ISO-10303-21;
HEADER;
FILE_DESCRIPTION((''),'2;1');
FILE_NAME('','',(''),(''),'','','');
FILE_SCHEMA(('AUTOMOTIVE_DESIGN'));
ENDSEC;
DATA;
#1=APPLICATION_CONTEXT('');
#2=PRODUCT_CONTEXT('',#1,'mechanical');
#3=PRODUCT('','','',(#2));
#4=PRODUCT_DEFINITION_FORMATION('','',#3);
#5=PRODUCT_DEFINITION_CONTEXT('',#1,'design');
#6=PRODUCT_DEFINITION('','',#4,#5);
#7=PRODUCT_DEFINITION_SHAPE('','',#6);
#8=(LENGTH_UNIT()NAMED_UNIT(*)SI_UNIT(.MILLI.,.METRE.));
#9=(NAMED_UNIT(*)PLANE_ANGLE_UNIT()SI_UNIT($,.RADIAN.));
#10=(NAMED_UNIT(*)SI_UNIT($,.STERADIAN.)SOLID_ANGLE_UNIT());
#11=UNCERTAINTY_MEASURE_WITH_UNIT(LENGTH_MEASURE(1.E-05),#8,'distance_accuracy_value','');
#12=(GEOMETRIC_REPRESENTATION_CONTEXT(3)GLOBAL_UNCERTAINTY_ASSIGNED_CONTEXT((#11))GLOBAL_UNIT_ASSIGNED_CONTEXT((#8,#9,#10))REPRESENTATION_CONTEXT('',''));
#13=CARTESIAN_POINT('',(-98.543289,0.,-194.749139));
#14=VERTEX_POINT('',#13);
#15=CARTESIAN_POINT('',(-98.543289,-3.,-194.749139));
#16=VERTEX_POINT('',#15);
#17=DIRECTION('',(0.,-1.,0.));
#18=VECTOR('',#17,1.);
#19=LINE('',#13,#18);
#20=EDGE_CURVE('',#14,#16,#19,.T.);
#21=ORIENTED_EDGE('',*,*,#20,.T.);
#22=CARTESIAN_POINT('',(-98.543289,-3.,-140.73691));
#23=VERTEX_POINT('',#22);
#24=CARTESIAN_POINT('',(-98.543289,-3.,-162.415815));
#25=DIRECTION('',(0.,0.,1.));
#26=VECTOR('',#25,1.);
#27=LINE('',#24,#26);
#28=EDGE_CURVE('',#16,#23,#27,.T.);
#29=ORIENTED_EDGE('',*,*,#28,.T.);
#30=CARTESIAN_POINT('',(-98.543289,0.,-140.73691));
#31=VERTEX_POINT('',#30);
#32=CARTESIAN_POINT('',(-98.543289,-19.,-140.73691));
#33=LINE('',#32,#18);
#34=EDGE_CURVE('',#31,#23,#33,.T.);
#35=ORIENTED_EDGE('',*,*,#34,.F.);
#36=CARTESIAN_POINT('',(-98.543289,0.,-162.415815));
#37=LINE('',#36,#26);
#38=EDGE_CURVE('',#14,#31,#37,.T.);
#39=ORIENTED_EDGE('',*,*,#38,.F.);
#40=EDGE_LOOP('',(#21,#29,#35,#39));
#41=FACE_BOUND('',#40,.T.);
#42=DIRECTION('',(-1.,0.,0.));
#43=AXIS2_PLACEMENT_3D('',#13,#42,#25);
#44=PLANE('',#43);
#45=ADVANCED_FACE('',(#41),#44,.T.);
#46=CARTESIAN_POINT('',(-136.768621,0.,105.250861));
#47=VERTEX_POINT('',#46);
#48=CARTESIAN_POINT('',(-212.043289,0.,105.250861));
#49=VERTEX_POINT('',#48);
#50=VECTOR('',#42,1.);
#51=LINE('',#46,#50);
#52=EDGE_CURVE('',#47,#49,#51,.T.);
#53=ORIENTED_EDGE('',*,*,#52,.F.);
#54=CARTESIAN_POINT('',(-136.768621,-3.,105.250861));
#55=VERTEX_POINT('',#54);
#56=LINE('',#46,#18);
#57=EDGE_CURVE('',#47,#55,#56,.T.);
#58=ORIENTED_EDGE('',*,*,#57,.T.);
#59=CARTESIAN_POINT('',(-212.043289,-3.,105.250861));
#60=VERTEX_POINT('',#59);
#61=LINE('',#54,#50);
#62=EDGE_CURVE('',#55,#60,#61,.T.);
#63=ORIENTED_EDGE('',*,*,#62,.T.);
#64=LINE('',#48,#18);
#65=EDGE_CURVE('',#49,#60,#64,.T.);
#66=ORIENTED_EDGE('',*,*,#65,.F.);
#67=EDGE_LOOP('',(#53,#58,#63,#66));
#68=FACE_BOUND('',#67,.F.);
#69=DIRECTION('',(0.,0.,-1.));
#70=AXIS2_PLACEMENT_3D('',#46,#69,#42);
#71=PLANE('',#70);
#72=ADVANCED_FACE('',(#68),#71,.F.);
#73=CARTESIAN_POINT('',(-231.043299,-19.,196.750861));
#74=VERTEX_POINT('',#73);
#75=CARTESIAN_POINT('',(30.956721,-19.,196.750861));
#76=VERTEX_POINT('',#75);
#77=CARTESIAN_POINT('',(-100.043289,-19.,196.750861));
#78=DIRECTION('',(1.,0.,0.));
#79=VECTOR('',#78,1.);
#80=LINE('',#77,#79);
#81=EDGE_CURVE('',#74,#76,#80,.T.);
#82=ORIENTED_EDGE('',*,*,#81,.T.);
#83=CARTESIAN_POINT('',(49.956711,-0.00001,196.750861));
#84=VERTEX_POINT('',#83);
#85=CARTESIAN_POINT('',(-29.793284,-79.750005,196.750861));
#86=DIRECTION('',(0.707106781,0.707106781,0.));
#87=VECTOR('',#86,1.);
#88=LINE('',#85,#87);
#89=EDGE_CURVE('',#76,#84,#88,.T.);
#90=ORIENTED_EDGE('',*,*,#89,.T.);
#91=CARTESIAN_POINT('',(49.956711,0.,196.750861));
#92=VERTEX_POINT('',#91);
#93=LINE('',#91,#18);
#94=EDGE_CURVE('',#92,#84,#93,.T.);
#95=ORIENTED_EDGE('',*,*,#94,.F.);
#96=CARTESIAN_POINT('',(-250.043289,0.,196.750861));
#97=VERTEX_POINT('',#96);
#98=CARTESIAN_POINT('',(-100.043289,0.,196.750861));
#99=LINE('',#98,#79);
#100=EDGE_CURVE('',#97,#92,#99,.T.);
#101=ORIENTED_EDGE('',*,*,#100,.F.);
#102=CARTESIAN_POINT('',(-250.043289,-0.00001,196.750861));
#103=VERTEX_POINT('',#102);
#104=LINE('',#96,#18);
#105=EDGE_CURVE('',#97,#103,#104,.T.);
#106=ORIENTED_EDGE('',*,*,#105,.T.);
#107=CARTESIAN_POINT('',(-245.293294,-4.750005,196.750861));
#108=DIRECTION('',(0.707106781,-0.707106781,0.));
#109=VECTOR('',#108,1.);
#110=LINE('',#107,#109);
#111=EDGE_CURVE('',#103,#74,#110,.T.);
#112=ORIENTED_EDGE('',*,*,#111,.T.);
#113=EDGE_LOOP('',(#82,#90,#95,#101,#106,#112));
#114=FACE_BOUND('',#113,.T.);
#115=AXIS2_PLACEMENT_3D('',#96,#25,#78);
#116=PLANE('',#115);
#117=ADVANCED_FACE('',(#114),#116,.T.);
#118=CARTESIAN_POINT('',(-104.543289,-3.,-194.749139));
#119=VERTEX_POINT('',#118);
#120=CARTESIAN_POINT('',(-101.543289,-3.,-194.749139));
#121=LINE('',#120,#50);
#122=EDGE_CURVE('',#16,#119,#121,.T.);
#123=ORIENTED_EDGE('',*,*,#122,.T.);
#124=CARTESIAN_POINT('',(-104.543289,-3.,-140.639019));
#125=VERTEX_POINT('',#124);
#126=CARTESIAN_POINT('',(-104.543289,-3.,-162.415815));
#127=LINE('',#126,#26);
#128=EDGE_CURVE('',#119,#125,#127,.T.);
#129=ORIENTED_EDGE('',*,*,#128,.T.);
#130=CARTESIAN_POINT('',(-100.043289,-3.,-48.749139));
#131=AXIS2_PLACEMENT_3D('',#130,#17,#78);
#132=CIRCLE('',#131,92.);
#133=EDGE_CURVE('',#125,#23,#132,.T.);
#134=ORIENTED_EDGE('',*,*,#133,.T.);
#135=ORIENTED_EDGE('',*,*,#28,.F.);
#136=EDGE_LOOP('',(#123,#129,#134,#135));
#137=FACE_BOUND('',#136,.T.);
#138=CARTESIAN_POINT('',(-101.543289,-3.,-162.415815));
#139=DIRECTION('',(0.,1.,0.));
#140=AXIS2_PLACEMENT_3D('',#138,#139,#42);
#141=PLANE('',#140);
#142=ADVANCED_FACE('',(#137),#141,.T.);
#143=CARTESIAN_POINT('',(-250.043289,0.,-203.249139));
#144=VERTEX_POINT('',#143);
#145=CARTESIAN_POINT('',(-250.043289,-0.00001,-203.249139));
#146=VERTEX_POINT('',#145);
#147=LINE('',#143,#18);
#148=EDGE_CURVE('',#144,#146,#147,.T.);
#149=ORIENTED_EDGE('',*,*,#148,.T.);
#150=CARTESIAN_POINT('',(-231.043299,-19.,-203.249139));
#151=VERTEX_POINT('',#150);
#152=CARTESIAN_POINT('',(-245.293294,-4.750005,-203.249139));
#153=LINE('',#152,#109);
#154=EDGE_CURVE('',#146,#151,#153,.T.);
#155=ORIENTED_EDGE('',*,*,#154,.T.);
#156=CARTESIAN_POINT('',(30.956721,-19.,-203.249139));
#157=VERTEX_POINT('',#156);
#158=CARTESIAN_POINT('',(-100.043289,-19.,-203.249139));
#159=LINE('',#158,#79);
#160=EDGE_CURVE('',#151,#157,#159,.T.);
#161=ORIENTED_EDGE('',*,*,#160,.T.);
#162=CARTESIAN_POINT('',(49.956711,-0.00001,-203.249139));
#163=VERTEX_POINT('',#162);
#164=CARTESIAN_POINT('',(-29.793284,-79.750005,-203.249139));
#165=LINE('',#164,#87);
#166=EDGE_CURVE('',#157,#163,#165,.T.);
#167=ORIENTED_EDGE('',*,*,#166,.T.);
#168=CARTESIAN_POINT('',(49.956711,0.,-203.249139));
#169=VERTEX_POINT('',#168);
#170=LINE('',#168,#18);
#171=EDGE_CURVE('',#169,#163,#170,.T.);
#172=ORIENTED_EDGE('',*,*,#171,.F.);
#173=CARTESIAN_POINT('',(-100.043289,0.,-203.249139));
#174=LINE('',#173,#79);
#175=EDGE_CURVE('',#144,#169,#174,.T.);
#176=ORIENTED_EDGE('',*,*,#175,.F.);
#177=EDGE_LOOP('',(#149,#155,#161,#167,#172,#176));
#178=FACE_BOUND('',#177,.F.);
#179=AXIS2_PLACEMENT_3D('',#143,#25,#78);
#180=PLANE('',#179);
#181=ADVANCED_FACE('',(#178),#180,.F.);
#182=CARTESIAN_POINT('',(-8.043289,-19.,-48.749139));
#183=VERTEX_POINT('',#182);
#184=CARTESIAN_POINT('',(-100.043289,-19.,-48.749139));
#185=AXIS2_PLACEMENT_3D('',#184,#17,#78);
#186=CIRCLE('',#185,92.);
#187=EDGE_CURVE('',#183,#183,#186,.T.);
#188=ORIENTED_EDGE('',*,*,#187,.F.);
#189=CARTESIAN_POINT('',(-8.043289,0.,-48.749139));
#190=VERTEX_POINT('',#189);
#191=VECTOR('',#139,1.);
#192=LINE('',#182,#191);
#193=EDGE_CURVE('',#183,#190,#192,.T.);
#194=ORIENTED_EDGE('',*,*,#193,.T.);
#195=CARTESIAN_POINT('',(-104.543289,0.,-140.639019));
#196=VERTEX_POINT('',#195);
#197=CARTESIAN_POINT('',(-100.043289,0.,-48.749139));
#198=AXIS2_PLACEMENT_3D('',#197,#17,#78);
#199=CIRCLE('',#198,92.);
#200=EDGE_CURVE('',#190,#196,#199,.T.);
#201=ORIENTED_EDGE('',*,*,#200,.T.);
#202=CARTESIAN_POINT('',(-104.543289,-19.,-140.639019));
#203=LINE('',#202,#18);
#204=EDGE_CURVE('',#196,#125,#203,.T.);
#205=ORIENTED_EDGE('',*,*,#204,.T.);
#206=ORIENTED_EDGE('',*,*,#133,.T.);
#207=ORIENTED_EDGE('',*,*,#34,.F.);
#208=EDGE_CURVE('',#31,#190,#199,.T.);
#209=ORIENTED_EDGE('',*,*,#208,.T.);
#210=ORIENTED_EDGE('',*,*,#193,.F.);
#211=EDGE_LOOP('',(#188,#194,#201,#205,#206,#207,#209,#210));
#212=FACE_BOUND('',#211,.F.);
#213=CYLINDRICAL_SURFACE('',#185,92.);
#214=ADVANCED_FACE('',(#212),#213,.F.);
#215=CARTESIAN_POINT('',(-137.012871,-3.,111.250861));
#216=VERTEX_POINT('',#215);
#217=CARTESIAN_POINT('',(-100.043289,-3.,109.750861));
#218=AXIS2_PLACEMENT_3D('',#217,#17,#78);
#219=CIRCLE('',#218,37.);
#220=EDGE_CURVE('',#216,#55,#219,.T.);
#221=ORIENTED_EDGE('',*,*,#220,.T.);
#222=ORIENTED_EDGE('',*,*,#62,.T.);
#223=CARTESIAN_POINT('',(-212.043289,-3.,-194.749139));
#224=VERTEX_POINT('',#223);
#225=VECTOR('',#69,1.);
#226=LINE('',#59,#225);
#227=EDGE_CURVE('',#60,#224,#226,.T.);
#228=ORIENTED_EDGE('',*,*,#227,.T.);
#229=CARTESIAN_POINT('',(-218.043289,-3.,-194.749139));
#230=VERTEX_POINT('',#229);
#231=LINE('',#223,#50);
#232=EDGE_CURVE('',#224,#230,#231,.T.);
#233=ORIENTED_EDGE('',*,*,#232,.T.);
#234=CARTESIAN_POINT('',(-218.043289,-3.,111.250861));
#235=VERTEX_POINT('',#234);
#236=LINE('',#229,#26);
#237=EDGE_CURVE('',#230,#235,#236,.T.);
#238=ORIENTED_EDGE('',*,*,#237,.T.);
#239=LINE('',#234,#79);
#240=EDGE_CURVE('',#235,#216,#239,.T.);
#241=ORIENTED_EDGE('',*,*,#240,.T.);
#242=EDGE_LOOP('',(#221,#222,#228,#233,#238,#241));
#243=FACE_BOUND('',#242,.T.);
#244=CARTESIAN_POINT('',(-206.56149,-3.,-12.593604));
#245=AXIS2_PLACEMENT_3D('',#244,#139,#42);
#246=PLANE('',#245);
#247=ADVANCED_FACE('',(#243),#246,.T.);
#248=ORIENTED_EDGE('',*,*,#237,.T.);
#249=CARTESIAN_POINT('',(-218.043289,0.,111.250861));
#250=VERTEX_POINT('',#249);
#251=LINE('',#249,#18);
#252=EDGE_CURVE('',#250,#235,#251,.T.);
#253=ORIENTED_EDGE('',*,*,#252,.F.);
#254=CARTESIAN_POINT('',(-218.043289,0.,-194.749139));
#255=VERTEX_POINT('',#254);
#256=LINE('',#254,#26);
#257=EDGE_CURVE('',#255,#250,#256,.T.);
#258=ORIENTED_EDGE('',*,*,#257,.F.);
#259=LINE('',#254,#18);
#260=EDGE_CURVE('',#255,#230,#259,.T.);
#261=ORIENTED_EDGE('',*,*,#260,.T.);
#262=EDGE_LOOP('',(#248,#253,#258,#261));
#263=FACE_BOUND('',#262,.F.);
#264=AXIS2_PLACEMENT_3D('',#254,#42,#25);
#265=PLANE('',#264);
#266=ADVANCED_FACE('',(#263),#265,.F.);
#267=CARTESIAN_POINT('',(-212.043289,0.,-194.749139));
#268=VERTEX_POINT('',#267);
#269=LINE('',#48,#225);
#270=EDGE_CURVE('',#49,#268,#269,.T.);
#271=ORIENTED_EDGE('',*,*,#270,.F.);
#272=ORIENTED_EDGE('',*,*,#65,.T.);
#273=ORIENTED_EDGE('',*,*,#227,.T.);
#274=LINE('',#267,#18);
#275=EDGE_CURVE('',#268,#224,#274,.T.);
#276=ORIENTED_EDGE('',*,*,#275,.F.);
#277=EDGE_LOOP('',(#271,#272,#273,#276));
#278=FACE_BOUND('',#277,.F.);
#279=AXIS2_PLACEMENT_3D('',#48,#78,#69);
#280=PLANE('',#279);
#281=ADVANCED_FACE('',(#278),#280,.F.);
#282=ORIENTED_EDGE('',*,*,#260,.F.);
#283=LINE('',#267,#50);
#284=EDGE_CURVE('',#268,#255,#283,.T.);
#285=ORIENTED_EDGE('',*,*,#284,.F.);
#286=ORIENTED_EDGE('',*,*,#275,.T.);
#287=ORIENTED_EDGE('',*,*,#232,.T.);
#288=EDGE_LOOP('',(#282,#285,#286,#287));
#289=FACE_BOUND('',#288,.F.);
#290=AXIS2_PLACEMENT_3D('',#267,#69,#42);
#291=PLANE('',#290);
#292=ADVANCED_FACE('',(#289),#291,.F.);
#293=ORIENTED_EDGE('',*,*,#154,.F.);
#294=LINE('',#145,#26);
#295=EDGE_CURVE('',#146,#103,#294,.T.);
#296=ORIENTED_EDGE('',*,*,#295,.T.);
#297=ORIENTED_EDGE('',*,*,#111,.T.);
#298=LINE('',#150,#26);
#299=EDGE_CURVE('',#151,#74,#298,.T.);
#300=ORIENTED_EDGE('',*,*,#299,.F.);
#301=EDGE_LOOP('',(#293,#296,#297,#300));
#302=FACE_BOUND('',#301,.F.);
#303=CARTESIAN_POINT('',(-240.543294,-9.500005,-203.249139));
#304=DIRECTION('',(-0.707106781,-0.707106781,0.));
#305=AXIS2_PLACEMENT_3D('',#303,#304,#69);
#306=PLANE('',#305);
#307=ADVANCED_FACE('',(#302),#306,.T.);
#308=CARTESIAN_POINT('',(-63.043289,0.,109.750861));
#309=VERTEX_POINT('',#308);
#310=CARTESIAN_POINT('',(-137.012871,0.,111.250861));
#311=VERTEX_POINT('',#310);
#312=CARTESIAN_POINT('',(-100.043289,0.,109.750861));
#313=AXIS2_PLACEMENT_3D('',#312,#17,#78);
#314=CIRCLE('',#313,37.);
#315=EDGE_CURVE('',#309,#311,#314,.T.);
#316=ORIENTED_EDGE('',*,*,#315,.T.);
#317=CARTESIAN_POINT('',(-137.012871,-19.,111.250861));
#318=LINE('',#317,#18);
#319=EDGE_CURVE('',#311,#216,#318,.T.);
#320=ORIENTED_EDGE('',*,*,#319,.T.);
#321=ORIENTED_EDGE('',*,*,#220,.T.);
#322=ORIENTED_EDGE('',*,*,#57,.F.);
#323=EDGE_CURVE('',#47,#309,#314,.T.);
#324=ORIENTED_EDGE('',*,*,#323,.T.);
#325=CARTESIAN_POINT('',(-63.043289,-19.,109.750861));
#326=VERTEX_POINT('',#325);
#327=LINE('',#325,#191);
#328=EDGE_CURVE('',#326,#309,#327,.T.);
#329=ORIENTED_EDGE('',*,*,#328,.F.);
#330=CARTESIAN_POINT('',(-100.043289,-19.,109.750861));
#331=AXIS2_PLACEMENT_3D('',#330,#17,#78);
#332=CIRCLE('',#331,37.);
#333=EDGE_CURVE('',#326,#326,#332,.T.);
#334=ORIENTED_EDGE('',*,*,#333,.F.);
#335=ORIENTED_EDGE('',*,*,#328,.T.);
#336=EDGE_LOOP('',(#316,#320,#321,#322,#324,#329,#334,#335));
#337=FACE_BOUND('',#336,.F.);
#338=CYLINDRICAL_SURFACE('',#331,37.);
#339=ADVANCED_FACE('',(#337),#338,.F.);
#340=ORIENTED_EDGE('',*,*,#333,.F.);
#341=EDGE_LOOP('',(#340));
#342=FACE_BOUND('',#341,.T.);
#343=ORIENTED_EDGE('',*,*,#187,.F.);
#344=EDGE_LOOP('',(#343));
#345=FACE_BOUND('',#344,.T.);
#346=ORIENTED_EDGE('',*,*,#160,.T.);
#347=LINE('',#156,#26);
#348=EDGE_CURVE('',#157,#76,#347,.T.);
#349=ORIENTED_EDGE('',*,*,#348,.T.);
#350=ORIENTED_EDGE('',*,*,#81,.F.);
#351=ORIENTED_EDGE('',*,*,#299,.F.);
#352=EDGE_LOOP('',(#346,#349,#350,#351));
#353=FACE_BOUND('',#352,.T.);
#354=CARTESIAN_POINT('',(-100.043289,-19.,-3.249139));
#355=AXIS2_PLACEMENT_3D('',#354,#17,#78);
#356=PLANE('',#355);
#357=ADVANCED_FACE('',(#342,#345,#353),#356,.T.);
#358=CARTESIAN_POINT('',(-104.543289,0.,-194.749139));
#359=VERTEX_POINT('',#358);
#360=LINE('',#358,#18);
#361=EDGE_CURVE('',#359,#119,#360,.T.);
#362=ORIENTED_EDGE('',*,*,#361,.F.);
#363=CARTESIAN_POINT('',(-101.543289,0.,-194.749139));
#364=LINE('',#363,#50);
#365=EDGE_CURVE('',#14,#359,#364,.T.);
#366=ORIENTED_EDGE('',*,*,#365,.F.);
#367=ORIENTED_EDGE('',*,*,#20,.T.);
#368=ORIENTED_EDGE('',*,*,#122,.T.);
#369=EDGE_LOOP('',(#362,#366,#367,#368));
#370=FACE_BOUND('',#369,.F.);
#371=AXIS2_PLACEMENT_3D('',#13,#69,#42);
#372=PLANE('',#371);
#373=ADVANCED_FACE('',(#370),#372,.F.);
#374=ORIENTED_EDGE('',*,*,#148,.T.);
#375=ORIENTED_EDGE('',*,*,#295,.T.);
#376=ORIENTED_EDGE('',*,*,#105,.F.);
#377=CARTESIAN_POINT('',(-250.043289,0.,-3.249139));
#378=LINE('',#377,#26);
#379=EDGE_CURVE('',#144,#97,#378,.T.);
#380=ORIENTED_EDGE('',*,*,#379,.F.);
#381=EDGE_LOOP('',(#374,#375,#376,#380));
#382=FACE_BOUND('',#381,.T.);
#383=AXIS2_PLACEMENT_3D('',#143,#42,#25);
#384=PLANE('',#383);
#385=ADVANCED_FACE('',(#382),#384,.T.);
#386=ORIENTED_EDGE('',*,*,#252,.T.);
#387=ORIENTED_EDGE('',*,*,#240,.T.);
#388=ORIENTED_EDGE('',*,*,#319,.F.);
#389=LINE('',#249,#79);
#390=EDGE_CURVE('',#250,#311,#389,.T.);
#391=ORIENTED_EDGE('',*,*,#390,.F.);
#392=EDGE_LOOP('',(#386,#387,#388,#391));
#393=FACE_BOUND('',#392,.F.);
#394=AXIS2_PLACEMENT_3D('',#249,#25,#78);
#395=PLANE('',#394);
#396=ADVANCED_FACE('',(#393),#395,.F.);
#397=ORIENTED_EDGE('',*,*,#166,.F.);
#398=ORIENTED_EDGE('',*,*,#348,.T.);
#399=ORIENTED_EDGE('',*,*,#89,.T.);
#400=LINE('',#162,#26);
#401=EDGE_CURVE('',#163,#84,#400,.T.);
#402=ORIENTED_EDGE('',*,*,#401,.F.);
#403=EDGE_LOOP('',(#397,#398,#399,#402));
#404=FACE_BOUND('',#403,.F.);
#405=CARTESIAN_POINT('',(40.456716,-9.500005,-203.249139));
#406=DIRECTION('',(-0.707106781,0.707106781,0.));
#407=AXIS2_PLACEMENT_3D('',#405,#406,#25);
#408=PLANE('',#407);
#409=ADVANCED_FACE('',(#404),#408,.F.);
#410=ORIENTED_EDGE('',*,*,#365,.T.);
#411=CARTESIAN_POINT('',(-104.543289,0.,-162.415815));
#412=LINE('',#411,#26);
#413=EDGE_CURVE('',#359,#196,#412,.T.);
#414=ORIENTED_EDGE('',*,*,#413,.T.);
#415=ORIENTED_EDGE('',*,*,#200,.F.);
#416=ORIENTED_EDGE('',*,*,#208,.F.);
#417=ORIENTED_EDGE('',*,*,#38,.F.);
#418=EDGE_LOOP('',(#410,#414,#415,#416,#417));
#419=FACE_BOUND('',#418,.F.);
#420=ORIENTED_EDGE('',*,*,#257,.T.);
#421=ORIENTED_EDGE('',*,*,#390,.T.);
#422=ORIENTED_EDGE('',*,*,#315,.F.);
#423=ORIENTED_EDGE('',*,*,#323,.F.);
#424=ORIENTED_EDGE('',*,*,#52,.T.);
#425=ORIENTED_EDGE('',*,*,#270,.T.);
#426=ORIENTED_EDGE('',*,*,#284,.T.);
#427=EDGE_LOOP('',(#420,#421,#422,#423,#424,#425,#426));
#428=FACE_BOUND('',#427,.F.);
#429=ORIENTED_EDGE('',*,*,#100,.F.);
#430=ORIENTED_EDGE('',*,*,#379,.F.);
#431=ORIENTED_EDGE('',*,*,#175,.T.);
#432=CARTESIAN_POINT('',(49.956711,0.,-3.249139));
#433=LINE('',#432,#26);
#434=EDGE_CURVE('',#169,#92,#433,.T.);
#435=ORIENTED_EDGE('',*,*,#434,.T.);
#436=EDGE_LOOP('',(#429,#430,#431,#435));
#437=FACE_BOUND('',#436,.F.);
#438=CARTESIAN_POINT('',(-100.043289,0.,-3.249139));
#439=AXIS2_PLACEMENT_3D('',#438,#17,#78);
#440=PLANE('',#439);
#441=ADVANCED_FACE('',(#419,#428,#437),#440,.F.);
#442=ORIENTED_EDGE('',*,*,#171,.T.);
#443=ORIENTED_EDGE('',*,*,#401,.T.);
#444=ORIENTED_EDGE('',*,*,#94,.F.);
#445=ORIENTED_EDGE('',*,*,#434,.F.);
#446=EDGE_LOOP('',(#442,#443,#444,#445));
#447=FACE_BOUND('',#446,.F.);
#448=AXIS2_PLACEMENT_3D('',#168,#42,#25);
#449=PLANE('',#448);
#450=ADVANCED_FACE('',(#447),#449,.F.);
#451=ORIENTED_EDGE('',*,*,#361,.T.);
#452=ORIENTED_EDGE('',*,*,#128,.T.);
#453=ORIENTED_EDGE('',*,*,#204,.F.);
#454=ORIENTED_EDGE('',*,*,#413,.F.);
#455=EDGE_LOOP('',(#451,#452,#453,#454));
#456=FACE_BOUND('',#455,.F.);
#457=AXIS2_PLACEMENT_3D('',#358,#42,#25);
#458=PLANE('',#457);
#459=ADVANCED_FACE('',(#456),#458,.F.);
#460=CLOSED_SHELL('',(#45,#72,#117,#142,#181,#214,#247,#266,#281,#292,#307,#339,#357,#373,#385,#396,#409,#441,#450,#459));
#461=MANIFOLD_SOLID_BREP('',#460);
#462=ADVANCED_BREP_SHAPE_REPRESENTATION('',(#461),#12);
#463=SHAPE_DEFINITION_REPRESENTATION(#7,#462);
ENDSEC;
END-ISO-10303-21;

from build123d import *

# Parameters (mm, degrees)
F0_W     = 300
F0_H     = 400
F1_DEPTH = 19
F2_R     = 37
F2_R_2   = 92
F3_DEPTH = 19
F4_SIZE  = 18.99999
F6_DEPTH = 3
F7_W     = 6
F7_H     = 64.6666483516
F8_DEPTH = 3


# Not quite as in the source:
# - a fillet or chamfer is up to 0.001 mm smaller than in the source, because OpenCascade refuses the exact size


with BuildPart() as f1:
    # F0 (on Front) → F1 (new body)
    with BuildSketch(Plane.XZ):
        with Locations((-100.0432893634, -3.2491389651)):
            Rectangle(F0_W, F0_H)
    extrude(amount=F1_DEPTH)

    # F2 (on face) → F3 (cut)
    with BuildSketch(Plane.XZ.offset(19)):
        with Locations((-100.0432893634, 109.7508610349)):
            Circle(F2_R)
        with Locations((-100.0432893634, -48.7491389651)):
            Circle(F2_R_2)
    extrude(amount=-F3_DEPTH, mode=Mode.SUBTRACT)

    # F4 (size 19 in the source; OpenCascade refuses exactly that, so slightly less here)
    f4_edges = [f1.edges().sort_by_distance(p)[0] for p in [
        (-250.043289, -19, -3.249139),
        (49.956711, -19, -3.249139),
    ]]
    chamfer(f4_edges, length=F4_SIZE)

    # F5 (on face) → F6 (cut)
    with BuildSketch(Plane(origin=(0, 0, 0), x_dir=(-1, 0, 0), z_dir=(0, 1, 0))):
        Polygon((136.7686212203, 111.2508610349), (136.7686212203, 105.2508610349), (212.0432893634, 105.2508610349), (212.0432893634, -194.7491389651), (218.0432893634, -194.7491389651), (218.0432893634, 111.2508610349), align=None)
    extrude(amount=-F6_DEPTH, mode=Mode.SUBTRACT)

    # F7 (on face) → F8 (cut)
    with BuildSketch(Plane(origin=(0, 0, 0), x_dir=(-1, 0, 0), z_dir=(0, 1, 0))):
        with Locations((101.5432893634, -162.4158147893)):
            Rectangle(F7_W, F7_H)
    extrude(amount=-F8_DEPTH, mode=Mode.SUBTRACT)


solid = f1.part
